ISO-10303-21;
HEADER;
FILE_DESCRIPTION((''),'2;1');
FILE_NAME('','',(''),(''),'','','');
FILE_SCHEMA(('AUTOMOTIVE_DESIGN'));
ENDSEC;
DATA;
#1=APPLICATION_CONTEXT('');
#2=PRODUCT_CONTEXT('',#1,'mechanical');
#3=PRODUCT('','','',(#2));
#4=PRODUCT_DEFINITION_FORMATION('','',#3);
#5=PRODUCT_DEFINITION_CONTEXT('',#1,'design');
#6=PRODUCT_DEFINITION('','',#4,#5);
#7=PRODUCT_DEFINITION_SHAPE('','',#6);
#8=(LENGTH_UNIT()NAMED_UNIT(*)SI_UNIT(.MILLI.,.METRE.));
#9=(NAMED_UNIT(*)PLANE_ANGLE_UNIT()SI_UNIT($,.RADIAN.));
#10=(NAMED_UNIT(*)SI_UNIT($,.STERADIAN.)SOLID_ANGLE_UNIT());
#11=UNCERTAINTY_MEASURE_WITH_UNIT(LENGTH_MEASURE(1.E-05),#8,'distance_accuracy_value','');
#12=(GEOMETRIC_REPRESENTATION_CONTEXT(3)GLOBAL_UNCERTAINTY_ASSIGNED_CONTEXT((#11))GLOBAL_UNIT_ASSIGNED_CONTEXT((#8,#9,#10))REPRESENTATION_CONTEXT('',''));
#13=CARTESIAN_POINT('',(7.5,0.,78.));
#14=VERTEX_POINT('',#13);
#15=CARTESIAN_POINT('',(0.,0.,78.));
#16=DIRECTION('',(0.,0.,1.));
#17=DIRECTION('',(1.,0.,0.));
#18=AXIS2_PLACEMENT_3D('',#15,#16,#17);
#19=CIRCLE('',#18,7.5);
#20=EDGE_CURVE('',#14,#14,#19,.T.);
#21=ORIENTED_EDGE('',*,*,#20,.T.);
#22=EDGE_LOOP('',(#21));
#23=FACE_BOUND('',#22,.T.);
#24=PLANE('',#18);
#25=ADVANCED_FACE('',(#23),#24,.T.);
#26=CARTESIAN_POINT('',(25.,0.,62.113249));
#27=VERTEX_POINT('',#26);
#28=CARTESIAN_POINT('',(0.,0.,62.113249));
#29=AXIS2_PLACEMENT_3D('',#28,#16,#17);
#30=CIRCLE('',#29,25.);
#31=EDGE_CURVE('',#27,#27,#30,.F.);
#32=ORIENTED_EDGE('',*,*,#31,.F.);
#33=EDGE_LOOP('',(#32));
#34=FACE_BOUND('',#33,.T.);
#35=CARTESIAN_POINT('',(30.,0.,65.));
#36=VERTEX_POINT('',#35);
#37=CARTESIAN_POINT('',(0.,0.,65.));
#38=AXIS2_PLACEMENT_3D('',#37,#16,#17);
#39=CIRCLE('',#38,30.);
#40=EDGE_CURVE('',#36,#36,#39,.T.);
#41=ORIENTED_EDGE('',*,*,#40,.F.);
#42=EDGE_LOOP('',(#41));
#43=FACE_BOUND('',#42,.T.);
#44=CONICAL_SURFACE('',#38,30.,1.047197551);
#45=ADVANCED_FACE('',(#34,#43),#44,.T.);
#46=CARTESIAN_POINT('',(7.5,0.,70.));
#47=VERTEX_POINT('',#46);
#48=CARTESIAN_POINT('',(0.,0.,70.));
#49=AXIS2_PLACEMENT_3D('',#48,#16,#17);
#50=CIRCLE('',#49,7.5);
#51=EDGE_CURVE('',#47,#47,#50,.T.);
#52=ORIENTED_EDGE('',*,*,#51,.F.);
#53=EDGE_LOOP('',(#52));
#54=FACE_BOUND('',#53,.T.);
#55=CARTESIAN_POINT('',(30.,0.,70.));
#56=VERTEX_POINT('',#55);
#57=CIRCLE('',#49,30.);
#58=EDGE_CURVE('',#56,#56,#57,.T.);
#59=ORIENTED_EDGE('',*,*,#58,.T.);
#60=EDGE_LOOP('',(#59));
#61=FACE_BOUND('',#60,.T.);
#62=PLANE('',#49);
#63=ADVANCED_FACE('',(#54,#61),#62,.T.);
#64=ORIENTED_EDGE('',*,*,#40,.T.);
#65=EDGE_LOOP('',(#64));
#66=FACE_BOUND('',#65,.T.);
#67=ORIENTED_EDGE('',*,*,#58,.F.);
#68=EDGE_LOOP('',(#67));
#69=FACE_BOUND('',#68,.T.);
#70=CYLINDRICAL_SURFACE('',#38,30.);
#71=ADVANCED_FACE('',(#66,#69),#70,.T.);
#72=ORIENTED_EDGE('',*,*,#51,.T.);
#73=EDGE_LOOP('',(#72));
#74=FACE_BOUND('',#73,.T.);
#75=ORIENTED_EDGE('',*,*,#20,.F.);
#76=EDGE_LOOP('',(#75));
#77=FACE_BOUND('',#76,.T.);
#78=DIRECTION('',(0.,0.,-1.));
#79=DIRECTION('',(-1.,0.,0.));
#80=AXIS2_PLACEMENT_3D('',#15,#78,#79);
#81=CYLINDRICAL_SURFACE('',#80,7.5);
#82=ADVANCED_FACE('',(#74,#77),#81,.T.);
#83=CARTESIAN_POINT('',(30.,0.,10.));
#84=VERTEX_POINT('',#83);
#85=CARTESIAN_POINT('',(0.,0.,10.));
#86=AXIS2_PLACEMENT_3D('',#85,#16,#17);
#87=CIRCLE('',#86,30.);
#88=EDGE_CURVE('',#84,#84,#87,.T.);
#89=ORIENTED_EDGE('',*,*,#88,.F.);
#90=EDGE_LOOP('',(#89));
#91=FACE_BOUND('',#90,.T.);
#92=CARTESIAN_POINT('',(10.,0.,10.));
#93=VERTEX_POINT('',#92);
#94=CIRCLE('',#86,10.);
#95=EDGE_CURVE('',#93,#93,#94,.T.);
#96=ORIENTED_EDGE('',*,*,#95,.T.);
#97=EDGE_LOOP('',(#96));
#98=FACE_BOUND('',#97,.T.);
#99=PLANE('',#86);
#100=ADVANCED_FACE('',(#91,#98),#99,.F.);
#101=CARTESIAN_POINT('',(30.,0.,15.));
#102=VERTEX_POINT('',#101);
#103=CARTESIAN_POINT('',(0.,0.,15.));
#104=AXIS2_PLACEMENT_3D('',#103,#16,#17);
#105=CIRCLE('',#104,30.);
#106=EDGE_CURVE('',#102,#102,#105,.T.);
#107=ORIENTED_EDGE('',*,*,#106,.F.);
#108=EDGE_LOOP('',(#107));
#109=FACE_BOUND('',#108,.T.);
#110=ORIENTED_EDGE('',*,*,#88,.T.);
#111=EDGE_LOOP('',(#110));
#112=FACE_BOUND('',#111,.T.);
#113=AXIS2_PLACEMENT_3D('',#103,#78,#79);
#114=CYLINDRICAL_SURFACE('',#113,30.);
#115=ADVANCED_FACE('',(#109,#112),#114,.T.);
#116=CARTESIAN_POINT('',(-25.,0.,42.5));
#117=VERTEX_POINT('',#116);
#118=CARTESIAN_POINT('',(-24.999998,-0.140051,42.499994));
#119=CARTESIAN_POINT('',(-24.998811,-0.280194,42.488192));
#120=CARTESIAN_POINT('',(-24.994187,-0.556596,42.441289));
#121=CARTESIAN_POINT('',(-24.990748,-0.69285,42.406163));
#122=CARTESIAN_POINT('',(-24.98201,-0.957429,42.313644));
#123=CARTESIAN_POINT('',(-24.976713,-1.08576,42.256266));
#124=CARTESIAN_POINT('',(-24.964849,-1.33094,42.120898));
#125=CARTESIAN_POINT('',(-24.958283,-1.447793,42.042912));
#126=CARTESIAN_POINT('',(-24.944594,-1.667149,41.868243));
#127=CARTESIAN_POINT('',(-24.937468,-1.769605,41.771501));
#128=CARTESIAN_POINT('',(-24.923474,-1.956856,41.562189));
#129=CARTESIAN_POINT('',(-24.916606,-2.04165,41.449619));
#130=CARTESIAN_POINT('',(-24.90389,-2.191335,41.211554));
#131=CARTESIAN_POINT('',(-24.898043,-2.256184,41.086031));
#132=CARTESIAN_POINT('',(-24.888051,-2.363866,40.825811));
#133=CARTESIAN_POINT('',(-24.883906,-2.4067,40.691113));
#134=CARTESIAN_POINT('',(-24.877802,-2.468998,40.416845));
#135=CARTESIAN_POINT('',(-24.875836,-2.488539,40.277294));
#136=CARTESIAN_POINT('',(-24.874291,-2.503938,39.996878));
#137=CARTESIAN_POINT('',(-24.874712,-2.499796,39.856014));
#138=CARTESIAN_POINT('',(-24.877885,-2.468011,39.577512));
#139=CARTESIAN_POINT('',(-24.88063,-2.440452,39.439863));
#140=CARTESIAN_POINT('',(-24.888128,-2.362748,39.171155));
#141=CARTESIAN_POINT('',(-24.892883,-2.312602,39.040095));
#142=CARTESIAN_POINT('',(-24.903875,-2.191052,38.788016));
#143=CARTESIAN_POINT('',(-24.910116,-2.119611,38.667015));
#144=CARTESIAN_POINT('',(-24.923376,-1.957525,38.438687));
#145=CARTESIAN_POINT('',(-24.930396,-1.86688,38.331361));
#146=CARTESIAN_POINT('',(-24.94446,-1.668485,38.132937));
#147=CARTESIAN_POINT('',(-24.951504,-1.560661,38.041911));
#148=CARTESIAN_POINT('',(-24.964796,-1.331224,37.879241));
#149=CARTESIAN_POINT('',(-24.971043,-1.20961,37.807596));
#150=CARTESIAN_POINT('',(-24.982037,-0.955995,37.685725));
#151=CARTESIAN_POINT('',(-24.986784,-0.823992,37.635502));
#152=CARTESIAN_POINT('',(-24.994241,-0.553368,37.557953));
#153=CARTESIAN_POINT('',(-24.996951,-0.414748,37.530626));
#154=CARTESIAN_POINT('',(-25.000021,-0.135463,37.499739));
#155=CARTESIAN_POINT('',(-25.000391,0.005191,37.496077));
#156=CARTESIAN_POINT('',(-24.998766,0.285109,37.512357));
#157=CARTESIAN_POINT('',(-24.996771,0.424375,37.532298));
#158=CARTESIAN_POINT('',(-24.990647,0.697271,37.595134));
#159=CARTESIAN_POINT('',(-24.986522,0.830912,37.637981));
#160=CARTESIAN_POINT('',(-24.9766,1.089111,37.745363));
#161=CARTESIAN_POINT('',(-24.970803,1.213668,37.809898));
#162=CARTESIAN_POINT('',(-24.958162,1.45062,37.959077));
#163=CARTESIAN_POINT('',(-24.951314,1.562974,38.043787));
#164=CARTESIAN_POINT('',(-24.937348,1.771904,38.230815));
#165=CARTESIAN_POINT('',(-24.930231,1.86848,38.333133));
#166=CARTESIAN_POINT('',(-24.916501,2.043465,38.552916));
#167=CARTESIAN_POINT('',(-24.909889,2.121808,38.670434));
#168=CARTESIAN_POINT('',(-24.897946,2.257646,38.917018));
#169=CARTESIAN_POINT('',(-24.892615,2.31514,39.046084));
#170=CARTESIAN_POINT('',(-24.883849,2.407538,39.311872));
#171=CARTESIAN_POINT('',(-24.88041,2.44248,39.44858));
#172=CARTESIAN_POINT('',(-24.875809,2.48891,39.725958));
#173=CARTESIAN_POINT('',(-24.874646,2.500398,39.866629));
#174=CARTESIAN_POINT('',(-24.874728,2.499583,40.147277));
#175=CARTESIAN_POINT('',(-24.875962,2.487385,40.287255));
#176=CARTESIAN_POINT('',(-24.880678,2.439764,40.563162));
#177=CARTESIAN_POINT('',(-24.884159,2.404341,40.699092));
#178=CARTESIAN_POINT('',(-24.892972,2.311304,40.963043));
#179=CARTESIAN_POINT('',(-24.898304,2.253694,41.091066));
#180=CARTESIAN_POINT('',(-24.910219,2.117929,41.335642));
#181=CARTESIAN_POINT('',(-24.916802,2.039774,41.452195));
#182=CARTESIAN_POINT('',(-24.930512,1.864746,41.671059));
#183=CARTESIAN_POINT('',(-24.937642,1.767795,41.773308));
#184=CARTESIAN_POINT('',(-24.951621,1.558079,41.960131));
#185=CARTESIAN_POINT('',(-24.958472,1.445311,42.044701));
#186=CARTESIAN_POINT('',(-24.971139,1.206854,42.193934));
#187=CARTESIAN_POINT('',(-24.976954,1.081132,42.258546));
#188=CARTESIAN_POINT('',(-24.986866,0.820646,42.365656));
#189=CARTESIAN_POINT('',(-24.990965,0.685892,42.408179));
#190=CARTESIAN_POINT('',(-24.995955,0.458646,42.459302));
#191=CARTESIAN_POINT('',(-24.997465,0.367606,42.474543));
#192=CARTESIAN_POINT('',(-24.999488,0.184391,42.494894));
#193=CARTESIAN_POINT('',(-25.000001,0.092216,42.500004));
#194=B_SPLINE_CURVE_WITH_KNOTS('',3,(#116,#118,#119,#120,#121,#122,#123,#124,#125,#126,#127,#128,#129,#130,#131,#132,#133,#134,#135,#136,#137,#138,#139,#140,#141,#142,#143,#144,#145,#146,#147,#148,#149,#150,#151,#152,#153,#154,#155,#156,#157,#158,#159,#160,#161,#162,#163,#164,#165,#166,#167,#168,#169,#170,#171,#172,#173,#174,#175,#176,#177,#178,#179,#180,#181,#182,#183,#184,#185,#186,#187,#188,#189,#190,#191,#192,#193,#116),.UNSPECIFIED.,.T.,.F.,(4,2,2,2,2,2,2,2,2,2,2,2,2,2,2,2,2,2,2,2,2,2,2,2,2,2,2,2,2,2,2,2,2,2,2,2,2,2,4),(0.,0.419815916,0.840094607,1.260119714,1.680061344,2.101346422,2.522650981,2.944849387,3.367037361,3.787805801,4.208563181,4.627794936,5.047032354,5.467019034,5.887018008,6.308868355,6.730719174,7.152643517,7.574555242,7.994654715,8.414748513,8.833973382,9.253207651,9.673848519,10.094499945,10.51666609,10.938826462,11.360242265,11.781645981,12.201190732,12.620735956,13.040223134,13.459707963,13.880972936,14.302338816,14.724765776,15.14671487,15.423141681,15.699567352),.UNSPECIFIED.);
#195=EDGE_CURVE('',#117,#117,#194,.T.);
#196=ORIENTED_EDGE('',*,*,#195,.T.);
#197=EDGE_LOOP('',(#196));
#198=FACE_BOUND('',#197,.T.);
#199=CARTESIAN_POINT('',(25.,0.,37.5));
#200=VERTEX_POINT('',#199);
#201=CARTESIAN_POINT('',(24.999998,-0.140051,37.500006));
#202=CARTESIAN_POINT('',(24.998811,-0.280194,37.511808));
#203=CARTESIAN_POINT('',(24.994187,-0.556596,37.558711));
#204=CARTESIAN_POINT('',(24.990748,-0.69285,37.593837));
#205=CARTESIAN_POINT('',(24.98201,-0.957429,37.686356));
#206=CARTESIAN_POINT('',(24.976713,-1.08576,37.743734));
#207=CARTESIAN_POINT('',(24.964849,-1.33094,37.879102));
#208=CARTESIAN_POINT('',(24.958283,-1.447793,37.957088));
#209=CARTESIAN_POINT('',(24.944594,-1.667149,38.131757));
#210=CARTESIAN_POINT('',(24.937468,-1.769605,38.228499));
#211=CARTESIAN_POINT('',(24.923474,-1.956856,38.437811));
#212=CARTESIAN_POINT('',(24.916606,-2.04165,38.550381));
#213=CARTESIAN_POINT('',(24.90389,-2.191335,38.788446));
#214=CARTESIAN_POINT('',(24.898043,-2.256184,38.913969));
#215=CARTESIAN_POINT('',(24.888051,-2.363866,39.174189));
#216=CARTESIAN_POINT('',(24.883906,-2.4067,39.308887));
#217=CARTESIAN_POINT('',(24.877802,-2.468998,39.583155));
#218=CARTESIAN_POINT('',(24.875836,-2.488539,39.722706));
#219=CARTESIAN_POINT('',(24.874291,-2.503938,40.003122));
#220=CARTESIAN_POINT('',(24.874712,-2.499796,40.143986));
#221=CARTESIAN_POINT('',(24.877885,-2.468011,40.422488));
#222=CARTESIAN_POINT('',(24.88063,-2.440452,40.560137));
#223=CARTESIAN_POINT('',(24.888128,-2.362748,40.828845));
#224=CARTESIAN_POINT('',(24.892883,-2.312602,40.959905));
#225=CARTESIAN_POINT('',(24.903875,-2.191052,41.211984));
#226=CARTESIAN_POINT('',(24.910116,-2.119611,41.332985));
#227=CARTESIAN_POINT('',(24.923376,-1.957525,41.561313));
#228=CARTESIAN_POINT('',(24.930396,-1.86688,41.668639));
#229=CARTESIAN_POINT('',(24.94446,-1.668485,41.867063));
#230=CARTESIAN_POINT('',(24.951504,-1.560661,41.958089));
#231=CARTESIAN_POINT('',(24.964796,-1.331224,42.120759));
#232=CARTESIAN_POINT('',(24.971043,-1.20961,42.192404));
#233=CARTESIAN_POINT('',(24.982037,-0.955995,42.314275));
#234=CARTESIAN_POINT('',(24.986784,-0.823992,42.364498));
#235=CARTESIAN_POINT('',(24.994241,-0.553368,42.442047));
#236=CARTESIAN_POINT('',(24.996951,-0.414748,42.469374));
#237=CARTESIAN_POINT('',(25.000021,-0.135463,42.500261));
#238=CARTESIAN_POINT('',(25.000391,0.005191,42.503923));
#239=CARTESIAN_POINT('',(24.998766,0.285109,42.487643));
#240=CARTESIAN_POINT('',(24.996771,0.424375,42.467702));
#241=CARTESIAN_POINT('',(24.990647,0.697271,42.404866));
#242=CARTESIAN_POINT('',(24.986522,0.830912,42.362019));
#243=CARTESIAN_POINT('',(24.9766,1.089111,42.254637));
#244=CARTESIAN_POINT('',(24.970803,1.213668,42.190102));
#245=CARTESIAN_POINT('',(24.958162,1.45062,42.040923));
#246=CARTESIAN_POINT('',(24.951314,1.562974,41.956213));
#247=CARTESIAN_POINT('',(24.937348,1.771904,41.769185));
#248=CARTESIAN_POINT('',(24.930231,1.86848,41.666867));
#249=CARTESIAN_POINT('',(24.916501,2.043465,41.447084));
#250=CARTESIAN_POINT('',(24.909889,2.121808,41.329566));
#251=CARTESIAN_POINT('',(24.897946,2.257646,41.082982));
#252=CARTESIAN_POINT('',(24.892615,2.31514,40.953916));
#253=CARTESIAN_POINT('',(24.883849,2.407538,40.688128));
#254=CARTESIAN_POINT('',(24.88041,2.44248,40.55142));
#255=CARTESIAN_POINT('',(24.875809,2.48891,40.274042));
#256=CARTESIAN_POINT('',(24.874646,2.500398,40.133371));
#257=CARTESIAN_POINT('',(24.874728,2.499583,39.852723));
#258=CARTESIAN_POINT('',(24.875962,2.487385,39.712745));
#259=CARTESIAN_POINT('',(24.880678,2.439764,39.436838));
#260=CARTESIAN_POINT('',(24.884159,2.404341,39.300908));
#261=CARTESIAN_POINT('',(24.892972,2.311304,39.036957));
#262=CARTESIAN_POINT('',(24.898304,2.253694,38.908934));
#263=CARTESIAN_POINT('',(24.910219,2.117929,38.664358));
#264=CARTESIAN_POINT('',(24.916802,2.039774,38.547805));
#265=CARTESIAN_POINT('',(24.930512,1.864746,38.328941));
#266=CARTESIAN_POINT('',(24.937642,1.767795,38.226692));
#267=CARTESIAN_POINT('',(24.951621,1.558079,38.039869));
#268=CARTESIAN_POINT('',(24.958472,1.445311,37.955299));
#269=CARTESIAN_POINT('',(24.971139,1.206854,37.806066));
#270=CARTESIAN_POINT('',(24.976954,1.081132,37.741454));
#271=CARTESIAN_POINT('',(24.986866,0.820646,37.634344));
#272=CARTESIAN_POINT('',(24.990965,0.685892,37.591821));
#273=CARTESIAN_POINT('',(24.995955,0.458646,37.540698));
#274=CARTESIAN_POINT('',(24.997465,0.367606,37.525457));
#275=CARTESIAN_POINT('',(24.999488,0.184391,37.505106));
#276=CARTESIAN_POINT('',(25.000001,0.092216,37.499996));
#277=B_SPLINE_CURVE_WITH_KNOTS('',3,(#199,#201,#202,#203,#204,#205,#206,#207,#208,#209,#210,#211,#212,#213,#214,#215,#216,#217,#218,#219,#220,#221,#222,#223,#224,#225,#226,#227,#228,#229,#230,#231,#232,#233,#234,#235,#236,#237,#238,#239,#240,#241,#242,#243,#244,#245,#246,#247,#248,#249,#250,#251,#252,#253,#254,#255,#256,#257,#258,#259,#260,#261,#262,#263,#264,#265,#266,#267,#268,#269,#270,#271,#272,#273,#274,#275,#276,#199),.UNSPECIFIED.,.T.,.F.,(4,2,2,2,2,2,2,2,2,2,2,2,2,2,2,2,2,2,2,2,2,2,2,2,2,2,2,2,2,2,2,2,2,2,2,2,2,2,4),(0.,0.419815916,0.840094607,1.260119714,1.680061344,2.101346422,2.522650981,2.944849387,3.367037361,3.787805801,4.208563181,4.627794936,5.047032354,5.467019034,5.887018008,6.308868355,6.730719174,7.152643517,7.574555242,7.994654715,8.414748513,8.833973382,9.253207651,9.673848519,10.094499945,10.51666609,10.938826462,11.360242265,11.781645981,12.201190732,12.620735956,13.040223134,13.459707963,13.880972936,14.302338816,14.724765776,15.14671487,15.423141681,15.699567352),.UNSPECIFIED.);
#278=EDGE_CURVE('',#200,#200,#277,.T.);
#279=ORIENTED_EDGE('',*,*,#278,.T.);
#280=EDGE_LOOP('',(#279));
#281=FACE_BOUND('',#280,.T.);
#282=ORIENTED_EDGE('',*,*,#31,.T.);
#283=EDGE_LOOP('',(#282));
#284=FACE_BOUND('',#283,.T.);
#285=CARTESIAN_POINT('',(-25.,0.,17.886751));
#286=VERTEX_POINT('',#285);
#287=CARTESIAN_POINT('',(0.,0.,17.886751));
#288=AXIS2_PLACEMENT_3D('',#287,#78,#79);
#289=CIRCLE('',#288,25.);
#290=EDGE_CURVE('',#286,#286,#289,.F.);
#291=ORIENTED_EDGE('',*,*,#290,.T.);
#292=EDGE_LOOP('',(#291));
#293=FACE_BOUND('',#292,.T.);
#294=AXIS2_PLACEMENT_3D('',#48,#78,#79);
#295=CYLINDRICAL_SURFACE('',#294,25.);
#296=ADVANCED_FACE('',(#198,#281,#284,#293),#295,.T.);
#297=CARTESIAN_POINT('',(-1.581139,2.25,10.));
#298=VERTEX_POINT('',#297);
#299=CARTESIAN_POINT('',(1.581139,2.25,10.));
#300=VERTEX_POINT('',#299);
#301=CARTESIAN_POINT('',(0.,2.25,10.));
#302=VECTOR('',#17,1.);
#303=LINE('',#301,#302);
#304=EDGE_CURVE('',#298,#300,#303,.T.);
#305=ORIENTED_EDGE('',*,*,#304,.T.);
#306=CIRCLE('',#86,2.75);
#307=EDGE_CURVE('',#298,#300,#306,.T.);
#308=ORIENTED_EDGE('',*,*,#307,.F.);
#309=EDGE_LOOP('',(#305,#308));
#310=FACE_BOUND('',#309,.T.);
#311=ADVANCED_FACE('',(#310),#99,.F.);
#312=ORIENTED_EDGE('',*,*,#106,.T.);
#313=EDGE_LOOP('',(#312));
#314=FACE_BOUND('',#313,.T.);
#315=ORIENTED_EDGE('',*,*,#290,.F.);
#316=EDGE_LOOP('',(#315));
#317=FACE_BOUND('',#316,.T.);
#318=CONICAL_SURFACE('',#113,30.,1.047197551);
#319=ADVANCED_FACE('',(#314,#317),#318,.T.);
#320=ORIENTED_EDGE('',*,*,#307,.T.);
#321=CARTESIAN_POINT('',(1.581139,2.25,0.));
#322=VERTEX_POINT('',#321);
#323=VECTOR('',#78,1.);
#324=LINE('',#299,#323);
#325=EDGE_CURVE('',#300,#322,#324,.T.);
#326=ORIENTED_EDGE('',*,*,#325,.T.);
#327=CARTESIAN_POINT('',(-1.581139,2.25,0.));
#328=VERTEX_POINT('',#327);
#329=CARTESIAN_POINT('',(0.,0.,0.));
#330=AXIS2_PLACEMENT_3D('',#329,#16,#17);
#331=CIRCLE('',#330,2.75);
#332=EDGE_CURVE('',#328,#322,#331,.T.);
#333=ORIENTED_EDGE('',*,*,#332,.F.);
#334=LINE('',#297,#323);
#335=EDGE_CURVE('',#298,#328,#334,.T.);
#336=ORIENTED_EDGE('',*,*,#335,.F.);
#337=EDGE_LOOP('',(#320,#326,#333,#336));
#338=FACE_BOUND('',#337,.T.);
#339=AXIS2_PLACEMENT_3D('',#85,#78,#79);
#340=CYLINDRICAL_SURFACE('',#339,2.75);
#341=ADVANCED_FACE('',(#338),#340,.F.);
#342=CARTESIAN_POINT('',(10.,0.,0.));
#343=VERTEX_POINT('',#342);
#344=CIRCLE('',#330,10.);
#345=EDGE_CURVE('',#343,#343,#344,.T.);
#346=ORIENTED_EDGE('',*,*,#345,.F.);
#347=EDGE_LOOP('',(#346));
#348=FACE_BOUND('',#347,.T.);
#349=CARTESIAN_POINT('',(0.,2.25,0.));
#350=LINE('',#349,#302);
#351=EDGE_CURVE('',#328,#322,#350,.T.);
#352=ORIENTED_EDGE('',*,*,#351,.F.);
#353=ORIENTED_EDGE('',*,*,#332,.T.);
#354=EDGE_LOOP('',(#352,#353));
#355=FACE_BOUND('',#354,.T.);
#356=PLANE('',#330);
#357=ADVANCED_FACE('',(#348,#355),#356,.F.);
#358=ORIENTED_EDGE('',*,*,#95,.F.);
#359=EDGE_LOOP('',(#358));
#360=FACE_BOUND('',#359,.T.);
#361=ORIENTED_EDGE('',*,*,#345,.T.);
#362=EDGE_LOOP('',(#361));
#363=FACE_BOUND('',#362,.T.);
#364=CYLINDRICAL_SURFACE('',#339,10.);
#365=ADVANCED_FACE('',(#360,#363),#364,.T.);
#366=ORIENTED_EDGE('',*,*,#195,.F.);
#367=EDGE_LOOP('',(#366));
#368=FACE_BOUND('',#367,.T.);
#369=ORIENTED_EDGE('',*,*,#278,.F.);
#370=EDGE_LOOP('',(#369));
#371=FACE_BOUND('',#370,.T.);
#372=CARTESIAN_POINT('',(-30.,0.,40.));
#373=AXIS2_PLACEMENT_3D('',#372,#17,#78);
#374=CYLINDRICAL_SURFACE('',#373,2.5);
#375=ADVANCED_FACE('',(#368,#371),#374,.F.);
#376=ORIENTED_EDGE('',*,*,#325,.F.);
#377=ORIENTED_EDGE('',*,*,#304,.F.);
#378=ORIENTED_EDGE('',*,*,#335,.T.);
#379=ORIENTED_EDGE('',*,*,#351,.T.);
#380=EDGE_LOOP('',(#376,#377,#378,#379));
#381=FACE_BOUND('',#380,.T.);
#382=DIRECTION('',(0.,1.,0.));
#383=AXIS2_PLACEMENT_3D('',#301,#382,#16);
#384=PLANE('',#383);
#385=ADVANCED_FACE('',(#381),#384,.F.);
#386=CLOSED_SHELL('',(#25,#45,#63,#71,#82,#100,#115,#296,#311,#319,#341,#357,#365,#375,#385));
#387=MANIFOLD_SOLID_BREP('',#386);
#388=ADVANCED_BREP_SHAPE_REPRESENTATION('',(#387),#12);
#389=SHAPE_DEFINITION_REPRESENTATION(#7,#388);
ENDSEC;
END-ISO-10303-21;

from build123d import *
from OCP.BRepFilletAPI import BRepFilletAPI_MakeChamfer

# Parameters (mm, degrees)
SKETCH2_R               = 10
BOSS_EXTRUDE1_DEPTH     = 10
SKETCH3_R               = 25
BOSS_EXTRUDE2_DEPTH     = 60
SKETCH4_R               = 30
BOSS_EXTRUDE3_DEPTH     = 5
CHAMFER1_SIZE           = 2.886751346
CHAMFER1_SIZE_2         = 5
CUT_EXTRUDE1_DEPTH      = 82.853527719
CUT_EXTRUDE1_DEPTH_BACK = 82.853527719
SKETCH5_R               = 2.5
SKETCH6_R               = 7.5
BOSS_EXTRUDE4_DEPTH     = 8


with BuildPart() as part:
    # Sketch2 → Boss-Extrude1 (new body)
    with BuildSketch(Plane.XY):
        Circle(SKETCH2_R)
        with BuildLine():
            Line((-1.58113883, 2.25), (1.58113883, 2.25))
            ThreePointArc((1.58113883, 2.25), (0, -2.75), (-1.58113883, 2.25))
        make_face(mode=Mode.SUBTRACT)
    extrude(amount=BOSS_EXTRUDE1_DEPTH)

    # Sketch3 → Boss-Extrude2 (add)
    with BuildSketch(Plane.XY.offset(10)):
        Circle(SKETCH3_R)
    extrude(amount=BOSS_EXTRUDE2_DEPTH)

    # Sketch4 → Boss-Extrude3 (add)
    with BuildSketch(Plane.XY.offset(70)):
        Circle(SKETCH4_R)
    boss_extrude3 = extrude(amount=-BOSS_EXTRUDE3_DEPTH)

    # Mirror1: Boss-Extrude3 across plane
    add(boss_extrude3.mirror(Plane.XY.offset(40)))

    # Chamfer1
    chamfer1_edges_1 = [part.edges().sort_by_distance(p)[0] for p in [
        (-25, 0, 65),
    ]]
    chamfer1_side_1 = [part.faces().sort_by_distance(p)[0] for p in [
        (-25, 0, 64.942264973),
    ]]
    chamfer1_edges_2 = [part.edges().sort_by_distance(p)[0] for p in [
        (-25, 0, 15),
    ]]
    chamfer1_side_2 = [part.faces().sort_by_distance(p)[0] for p in [
        (-25.057735027, 0, 15),
    ]]
    chamfer1 = BRepFilletAPI_MakeChamfer(part.part.solid().wrapped)
    for e in chamfer1_edges_1:
        chamfer1.Add(CHAMFER1_SIZE - 0.0001, CHAMFER1_SIZE_2 - 0.0001, e.wrapped, chamfer1_side_1[0].wrapped)
    for e in chamfer1_edges_2:
        chamfer1.Add(CHAMFER1_SIZE_2 - 0.0001, CHAMFER1_SIZE - 0.0001, e.wrapped, chamfer1_side_2[0].wrapped)
    add(Compound.cast(chamfer1.Shape()), mode=Mode.REPLACE)  # a hair under: the kernel refuses the full size

    # Sketch5 → Cut-Extrude1 (cut, two sides: drawn at the far end of the back side and taken through both)
    with BuildSketch(Plane(origin=(0, 0, 0), x_dir=(0, 0, -1), z_dir=(1, 0, 0)).offset(-CUT_EXTRUDE1_DEPTH_BACK)):
        with Locations((-40, 0)):
            Circle(SKETCH5_R)
    extrude(amount=CUT_EXTRUDE1_DEPTH + CUT_EXTRUDE1_DEPTH_BACK, mode=Mode.SUBTRACT)

    # Sketch6 → Boss-Extrude4 (add)
    with BuildSketch(Plane.XY.offset(70)):
        Circle(SKETCH6_R)
    extrude(amount=BOSS_EXTRUDE4_DEPTH)


solid = part.part
